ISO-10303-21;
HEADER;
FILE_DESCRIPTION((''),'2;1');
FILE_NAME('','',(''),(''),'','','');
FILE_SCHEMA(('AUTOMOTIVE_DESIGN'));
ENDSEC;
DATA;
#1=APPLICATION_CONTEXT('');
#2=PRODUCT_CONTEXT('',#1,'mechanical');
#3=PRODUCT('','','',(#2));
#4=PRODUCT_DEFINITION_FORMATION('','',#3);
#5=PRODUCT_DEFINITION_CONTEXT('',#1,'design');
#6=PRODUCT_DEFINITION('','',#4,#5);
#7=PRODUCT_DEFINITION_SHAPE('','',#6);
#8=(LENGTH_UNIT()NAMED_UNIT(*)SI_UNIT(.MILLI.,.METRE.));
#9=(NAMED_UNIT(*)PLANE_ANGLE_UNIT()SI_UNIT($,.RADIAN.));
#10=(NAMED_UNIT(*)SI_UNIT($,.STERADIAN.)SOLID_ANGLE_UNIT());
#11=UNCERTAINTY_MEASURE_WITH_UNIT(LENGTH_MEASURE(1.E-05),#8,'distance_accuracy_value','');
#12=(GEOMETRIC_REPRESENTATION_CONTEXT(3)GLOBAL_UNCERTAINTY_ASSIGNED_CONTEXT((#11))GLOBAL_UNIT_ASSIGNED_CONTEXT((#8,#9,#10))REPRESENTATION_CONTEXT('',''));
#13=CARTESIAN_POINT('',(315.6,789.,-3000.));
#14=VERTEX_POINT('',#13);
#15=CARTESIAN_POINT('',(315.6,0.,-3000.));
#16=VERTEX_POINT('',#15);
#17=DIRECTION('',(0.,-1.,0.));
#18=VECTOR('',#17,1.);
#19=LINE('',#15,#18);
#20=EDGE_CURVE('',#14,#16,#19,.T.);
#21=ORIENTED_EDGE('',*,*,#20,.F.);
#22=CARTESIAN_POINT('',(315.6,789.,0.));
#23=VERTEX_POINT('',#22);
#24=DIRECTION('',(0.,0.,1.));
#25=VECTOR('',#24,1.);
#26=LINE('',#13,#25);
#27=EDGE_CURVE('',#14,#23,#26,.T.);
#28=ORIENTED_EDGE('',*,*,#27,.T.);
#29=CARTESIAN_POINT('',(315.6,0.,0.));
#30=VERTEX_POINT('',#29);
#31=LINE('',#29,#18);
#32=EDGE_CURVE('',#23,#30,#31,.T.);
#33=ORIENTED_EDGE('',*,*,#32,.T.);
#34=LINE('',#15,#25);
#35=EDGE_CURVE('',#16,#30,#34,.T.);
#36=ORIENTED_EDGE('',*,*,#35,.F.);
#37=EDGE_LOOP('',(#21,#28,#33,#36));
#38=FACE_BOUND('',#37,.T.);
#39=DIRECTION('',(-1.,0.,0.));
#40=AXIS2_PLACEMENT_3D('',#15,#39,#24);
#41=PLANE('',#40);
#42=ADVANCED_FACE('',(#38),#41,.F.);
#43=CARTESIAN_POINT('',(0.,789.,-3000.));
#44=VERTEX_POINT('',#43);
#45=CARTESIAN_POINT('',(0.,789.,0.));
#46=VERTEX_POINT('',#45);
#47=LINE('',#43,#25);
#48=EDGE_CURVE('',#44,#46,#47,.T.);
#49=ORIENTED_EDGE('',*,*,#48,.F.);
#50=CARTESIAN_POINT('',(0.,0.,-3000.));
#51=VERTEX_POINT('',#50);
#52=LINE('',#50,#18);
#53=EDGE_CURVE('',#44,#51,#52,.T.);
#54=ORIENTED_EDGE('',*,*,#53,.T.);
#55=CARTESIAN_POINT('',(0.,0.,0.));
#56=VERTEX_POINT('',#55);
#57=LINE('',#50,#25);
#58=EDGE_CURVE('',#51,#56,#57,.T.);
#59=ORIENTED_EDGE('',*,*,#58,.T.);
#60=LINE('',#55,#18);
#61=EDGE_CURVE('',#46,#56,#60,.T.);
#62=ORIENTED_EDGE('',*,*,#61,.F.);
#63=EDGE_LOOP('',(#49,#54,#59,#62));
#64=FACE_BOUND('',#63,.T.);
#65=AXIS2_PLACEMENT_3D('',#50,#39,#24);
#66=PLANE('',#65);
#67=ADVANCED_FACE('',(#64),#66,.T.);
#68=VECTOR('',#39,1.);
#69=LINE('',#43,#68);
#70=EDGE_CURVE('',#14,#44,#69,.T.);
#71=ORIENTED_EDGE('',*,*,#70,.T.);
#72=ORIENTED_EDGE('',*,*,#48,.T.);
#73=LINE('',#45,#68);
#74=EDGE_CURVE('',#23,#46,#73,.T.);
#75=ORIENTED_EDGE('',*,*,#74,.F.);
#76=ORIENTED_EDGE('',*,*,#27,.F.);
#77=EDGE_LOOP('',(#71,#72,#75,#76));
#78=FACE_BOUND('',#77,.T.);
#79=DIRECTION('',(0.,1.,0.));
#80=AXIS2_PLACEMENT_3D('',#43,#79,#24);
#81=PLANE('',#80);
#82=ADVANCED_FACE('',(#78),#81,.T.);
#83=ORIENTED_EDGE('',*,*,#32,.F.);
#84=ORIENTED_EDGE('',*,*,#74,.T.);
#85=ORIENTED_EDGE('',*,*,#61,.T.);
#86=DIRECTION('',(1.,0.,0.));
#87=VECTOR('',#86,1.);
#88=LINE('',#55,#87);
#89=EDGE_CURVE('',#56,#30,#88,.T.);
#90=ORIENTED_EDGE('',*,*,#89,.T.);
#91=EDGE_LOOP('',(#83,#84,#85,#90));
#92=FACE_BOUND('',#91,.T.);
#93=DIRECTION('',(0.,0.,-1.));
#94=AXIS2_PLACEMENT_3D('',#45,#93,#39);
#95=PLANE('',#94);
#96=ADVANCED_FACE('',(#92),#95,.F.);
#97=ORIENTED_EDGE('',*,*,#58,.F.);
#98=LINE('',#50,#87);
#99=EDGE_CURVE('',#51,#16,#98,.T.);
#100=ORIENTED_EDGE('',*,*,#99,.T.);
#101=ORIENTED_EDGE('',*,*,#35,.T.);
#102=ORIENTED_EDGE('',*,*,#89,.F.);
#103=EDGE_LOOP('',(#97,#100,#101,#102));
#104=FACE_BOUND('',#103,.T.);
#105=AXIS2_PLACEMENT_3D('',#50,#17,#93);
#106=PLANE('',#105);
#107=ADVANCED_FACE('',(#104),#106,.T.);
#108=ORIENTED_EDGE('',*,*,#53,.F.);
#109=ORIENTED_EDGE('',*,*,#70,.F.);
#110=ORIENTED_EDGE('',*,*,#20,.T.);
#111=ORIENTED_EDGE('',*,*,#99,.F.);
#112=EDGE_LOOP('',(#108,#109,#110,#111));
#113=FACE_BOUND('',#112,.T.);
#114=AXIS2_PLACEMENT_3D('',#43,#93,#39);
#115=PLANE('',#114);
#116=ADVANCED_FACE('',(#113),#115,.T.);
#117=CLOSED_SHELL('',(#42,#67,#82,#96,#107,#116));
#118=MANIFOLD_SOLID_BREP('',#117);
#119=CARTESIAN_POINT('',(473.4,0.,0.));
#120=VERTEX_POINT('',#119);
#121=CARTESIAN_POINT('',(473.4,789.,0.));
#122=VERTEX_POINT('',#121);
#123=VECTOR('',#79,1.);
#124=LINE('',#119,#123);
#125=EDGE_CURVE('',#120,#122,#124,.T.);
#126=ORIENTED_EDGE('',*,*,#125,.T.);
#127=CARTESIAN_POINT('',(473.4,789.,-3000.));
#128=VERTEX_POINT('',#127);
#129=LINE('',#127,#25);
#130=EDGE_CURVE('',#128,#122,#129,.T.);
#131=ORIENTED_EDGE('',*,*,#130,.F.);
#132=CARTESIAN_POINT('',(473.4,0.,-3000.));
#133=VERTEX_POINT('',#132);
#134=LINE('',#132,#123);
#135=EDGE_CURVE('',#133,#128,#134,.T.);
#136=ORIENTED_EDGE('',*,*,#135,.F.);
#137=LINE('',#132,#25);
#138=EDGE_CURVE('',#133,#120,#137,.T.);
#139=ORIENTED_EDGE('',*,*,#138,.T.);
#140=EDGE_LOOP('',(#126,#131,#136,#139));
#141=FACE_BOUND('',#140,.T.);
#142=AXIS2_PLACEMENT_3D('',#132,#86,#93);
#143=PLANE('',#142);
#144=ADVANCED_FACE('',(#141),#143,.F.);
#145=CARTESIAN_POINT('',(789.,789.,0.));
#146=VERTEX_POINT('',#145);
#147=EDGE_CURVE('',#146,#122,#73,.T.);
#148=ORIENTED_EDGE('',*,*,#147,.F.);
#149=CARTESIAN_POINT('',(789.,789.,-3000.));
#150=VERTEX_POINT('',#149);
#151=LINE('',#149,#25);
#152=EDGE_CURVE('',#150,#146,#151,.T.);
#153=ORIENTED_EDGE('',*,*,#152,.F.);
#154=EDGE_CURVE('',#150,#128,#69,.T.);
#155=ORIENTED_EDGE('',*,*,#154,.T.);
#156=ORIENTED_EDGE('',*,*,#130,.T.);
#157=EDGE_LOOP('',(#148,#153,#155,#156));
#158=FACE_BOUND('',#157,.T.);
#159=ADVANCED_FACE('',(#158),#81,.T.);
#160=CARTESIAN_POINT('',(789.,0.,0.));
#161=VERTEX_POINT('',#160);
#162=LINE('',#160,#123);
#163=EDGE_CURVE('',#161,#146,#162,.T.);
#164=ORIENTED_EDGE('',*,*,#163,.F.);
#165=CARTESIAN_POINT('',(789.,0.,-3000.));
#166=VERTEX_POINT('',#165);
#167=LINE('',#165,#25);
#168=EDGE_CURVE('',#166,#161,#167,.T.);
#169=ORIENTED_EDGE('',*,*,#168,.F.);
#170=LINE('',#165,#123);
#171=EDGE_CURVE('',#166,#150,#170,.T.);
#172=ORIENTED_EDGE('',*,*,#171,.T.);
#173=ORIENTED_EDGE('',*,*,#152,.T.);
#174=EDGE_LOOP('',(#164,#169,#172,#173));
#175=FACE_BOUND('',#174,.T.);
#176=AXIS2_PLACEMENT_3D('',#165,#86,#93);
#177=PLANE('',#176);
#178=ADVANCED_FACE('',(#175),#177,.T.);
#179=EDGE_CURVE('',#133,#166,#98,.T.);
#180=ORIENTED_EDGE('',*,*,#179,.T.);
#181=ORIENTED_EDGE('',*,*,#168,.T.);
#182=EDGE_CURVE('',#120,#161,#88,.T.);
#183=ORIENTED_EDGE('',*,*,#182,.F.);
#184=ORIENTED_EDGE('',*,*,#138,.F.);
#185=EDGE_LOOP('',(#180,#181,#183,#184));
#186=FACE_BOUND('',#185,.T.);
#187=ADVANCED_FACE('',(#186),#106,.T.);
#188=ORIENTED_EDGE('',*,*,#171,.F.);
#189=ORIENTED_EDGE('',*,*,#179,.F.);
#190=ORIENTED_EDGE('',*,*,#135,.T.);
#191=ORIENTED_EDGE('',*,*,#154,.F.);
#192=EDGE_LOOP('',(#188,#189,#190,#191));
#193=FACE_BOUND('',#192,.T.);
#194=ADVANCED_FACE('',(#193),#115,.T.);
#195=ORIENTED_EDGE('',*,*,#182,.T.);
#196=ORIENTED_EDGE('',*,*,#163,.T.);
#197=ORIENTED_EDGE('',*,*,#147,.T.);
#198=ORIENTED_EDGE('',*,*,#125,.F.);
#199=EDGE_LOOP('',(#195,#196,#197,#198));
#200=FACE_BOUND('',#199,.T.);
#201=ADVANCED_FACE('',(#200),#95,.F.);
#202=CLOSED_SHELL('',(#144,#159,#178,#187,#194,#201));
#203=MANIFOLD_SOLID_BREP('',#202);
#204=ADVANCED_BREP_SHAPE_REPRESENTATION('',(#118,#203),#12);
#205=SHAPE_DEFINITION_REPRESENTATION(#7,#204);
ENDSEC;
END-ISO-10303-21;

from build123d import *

# Parameters (mm, degrees)
SKETCH_1_W        = 789
SKETCH_1_H        = 789
EXTRUDE_252_DEPTH = 3000
OTHER_START       = 315.6
OTHER_1_OUTLINE_W = 789
OTHER_1_OUTLINE_H = 3000
OTHER_1_DEPTH     = 157.8


# Read off the part's stored shape, not the designer's step: Полость1
with BuildPart() as part:
    # Эскиз1 → Extrude 252 (new body)
    with BuildSketch(Plane.XY):
        with Locations((394.5, 394.5)):
            Rectangle(SKETCH_1_W, SKETCH_1_H)
    extrude(amount=-EXTRUDE_252_DEPTH)

    # Полость1 outline → Полость1 (cut)
    with BuildSketch(Plane.YZ.offset(OTHER_START)):
        with Locations((394.5, -1500)):
            Rectangle(OTHER_1_OUTLINE_W, OTHER_1_OUTLINE_H)
    extrude(amount=OTHER_1_DEPTH, mode=Mode.SUBTRACT)


solid = part.part
